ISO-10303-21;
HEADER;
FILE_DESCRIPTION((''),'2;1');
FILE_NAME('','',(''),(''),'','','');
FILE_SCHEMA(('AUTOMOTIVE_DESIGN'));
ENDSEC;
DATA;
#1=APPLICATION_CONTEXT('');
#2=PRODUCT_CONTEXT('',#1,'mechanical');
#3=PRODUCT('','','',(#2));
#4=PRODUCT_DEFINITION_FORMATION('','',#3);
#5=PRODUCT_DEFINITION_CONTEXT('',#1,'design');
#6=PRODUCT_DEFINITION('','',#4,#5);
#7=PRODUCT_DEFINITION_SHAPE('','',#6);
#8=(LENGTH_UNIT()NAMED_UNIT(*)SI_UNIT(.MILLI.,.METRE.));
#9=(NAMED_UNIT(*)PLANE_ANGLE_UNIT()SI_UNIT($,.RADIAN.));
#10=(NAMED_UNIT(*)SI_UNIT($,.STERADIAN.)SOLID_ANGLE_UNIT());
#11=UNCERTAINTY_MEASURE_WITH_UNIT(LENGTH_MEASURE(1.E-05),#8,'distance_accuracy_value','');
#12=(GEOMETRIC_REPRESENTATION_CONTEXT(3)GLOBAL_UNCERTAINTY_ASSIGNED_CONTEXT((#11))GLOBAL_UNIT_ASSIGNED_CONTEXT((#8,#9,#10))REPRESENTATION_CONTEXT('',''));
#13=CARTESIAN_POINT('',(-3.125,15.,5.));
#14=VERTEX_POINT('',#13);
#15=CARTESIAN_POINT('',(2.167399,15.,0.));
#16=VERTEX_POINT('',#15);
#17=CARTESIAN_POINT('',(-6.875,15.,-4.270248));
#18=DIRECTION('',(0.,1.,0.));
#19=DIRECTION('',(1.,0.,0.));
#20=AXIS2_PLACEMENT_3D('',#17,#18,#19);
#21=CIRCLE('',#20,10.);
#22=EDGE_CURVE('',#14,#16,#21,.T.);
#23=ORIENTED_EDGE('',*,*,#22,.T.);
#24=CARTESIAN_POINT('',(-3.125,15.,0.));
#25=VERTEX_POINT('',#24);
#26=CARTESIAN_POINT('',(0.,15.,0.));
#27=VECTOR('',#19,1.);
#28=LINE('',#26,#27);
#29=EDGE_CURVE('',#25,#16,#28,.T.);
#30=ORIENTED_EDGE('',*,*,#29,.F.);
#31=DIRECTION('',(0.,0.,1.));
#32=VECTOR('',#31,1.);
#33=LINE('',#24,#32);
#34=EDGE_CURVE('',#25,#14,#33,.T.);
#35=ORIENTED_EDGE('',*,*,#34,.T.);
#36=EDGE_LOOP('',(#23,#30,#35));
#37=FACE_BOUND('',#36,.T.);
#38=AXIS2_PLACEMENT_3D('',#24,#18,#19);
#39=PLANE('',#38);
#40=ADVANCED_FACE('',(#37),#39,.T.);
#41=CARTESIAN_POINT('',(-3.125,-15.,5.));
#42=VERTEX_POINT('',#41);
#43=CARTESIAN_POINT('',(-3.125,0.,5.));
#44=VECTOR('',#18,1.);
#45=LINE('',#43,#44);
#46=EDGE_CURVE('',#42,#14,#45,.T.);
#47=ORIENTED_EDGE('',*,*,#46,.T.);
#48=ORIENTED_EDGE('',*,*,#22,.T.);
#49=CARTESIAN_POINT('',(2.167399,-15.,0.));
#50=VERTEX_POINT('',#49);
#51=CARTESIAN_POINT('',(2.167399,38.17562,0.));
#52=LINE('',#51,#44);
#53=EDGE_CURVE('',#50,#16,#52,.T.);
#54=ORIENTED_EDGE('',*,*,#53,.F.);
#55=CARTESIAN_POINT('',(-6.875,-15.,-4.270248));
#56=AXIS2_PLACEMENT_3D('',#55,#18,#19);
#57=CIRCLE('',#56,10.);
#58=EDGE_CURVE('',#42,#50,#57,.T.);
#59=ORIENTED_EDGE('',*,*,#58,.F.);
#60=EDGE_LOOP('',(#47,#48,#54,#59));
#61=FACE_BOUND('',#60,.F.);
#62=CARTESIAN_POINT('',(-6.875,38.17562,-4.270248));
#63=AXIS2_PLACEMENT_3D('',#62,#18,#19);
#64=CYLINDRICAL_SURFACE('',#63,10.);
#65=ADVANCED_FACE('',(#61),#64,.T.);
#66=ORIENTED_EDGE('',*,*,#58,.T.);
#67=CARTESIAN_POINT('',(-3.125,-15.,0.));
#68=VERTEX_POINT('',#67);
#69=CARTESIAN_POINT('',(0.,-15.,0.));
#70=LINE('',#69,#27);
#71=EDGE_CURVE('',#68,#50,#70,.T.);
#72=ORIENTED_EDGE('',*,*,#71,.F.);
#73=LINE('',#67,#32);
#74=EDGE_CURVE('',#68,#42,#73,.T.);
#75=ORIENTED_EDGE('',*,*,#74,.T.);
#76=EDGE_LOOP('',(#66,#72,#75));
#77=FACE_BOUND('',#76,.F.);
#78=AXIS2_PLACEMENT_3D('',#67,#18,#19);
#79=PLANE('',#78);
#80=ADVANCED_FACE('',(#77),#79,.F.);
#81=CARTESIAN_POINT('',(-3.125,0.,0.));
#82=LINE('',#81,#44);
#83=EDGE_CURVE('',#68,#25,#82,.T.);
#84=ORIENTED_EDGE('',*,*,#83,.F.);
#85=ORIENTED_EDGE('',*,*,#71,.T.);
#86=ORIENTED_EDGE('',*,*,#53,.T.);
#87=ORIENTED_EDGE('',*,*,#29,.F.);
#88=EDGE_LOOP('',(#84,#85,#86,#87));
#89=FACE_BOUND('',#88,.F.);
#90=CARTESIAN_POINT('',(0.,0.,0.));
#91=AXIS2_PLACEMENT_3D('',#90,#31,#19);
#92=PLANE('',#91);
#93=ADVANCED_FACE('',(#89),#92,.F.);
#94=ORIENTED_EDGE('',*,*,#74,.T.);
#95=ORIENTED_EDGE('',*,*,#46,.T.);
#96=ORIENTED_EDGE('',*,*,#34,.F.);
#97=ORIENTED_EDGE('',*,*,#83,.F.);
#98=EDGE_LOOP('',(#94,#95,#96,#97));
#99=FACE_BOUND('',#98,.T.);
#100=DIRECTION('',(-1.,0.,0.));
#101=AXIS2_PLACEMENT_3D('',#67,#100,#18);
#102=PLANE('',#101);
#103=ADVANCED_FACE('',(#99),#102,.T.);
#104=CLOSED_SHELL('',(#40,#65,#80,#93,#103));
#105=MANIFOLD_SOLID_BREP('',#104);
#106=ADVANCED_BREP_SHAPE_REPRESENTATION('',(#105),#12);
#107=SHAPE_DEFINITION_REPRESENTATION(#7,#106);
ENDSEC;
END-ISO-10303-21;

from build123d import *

# Parameters (mm, degrees)
F0_W        = 6.25
F0_H        = 30
F1_DEPTH    = 5
F2_T1_DEPTH = 76.3512405443


# Not quite as in the source:
# - a fillet or chamfer that OpenCascade refuses, or shapes differently, is made with other operations: its cross-section is extruded or revolved along the edge and cut away or added


with BuildPart() as f1:
    # F0 (on Top) → F1 (new body)
    with BuildSketch(Plane.XY):
        Rectangle(F0_W, F0_H)
    extrude(amount=F1_DEPTH)

    # F2: fillet of radius 10 on 1 edges, made by hand

    # F2_s2 → F2_t1 (cut)
    with BuildSketch(Plane.XZ.offset(-38.1756202722)):
        with BuildLine():
            ThreePointArc((3.125, -4.2702481089), (1.4165619759, 1.3199218349), (-3.125, 5))
            Line((-3.125, 5), (-3.05, 5.1854049622))
            ThreePointArc((-3.05, 5.1854049622), (0, 5.2), (3.125, 5.2))
            Line((3.125, 5.2), (3.325, 5))
            Line((3.325, 5), (3.325, -4.2702481089))
            Line((3.325, -4.2702481089), (3.125, -4.2702481089))
        make_face()
    extrude(amount=F2_T1_DEPTH, mode=Mode.SUBTRACT)


solid = f1.part
